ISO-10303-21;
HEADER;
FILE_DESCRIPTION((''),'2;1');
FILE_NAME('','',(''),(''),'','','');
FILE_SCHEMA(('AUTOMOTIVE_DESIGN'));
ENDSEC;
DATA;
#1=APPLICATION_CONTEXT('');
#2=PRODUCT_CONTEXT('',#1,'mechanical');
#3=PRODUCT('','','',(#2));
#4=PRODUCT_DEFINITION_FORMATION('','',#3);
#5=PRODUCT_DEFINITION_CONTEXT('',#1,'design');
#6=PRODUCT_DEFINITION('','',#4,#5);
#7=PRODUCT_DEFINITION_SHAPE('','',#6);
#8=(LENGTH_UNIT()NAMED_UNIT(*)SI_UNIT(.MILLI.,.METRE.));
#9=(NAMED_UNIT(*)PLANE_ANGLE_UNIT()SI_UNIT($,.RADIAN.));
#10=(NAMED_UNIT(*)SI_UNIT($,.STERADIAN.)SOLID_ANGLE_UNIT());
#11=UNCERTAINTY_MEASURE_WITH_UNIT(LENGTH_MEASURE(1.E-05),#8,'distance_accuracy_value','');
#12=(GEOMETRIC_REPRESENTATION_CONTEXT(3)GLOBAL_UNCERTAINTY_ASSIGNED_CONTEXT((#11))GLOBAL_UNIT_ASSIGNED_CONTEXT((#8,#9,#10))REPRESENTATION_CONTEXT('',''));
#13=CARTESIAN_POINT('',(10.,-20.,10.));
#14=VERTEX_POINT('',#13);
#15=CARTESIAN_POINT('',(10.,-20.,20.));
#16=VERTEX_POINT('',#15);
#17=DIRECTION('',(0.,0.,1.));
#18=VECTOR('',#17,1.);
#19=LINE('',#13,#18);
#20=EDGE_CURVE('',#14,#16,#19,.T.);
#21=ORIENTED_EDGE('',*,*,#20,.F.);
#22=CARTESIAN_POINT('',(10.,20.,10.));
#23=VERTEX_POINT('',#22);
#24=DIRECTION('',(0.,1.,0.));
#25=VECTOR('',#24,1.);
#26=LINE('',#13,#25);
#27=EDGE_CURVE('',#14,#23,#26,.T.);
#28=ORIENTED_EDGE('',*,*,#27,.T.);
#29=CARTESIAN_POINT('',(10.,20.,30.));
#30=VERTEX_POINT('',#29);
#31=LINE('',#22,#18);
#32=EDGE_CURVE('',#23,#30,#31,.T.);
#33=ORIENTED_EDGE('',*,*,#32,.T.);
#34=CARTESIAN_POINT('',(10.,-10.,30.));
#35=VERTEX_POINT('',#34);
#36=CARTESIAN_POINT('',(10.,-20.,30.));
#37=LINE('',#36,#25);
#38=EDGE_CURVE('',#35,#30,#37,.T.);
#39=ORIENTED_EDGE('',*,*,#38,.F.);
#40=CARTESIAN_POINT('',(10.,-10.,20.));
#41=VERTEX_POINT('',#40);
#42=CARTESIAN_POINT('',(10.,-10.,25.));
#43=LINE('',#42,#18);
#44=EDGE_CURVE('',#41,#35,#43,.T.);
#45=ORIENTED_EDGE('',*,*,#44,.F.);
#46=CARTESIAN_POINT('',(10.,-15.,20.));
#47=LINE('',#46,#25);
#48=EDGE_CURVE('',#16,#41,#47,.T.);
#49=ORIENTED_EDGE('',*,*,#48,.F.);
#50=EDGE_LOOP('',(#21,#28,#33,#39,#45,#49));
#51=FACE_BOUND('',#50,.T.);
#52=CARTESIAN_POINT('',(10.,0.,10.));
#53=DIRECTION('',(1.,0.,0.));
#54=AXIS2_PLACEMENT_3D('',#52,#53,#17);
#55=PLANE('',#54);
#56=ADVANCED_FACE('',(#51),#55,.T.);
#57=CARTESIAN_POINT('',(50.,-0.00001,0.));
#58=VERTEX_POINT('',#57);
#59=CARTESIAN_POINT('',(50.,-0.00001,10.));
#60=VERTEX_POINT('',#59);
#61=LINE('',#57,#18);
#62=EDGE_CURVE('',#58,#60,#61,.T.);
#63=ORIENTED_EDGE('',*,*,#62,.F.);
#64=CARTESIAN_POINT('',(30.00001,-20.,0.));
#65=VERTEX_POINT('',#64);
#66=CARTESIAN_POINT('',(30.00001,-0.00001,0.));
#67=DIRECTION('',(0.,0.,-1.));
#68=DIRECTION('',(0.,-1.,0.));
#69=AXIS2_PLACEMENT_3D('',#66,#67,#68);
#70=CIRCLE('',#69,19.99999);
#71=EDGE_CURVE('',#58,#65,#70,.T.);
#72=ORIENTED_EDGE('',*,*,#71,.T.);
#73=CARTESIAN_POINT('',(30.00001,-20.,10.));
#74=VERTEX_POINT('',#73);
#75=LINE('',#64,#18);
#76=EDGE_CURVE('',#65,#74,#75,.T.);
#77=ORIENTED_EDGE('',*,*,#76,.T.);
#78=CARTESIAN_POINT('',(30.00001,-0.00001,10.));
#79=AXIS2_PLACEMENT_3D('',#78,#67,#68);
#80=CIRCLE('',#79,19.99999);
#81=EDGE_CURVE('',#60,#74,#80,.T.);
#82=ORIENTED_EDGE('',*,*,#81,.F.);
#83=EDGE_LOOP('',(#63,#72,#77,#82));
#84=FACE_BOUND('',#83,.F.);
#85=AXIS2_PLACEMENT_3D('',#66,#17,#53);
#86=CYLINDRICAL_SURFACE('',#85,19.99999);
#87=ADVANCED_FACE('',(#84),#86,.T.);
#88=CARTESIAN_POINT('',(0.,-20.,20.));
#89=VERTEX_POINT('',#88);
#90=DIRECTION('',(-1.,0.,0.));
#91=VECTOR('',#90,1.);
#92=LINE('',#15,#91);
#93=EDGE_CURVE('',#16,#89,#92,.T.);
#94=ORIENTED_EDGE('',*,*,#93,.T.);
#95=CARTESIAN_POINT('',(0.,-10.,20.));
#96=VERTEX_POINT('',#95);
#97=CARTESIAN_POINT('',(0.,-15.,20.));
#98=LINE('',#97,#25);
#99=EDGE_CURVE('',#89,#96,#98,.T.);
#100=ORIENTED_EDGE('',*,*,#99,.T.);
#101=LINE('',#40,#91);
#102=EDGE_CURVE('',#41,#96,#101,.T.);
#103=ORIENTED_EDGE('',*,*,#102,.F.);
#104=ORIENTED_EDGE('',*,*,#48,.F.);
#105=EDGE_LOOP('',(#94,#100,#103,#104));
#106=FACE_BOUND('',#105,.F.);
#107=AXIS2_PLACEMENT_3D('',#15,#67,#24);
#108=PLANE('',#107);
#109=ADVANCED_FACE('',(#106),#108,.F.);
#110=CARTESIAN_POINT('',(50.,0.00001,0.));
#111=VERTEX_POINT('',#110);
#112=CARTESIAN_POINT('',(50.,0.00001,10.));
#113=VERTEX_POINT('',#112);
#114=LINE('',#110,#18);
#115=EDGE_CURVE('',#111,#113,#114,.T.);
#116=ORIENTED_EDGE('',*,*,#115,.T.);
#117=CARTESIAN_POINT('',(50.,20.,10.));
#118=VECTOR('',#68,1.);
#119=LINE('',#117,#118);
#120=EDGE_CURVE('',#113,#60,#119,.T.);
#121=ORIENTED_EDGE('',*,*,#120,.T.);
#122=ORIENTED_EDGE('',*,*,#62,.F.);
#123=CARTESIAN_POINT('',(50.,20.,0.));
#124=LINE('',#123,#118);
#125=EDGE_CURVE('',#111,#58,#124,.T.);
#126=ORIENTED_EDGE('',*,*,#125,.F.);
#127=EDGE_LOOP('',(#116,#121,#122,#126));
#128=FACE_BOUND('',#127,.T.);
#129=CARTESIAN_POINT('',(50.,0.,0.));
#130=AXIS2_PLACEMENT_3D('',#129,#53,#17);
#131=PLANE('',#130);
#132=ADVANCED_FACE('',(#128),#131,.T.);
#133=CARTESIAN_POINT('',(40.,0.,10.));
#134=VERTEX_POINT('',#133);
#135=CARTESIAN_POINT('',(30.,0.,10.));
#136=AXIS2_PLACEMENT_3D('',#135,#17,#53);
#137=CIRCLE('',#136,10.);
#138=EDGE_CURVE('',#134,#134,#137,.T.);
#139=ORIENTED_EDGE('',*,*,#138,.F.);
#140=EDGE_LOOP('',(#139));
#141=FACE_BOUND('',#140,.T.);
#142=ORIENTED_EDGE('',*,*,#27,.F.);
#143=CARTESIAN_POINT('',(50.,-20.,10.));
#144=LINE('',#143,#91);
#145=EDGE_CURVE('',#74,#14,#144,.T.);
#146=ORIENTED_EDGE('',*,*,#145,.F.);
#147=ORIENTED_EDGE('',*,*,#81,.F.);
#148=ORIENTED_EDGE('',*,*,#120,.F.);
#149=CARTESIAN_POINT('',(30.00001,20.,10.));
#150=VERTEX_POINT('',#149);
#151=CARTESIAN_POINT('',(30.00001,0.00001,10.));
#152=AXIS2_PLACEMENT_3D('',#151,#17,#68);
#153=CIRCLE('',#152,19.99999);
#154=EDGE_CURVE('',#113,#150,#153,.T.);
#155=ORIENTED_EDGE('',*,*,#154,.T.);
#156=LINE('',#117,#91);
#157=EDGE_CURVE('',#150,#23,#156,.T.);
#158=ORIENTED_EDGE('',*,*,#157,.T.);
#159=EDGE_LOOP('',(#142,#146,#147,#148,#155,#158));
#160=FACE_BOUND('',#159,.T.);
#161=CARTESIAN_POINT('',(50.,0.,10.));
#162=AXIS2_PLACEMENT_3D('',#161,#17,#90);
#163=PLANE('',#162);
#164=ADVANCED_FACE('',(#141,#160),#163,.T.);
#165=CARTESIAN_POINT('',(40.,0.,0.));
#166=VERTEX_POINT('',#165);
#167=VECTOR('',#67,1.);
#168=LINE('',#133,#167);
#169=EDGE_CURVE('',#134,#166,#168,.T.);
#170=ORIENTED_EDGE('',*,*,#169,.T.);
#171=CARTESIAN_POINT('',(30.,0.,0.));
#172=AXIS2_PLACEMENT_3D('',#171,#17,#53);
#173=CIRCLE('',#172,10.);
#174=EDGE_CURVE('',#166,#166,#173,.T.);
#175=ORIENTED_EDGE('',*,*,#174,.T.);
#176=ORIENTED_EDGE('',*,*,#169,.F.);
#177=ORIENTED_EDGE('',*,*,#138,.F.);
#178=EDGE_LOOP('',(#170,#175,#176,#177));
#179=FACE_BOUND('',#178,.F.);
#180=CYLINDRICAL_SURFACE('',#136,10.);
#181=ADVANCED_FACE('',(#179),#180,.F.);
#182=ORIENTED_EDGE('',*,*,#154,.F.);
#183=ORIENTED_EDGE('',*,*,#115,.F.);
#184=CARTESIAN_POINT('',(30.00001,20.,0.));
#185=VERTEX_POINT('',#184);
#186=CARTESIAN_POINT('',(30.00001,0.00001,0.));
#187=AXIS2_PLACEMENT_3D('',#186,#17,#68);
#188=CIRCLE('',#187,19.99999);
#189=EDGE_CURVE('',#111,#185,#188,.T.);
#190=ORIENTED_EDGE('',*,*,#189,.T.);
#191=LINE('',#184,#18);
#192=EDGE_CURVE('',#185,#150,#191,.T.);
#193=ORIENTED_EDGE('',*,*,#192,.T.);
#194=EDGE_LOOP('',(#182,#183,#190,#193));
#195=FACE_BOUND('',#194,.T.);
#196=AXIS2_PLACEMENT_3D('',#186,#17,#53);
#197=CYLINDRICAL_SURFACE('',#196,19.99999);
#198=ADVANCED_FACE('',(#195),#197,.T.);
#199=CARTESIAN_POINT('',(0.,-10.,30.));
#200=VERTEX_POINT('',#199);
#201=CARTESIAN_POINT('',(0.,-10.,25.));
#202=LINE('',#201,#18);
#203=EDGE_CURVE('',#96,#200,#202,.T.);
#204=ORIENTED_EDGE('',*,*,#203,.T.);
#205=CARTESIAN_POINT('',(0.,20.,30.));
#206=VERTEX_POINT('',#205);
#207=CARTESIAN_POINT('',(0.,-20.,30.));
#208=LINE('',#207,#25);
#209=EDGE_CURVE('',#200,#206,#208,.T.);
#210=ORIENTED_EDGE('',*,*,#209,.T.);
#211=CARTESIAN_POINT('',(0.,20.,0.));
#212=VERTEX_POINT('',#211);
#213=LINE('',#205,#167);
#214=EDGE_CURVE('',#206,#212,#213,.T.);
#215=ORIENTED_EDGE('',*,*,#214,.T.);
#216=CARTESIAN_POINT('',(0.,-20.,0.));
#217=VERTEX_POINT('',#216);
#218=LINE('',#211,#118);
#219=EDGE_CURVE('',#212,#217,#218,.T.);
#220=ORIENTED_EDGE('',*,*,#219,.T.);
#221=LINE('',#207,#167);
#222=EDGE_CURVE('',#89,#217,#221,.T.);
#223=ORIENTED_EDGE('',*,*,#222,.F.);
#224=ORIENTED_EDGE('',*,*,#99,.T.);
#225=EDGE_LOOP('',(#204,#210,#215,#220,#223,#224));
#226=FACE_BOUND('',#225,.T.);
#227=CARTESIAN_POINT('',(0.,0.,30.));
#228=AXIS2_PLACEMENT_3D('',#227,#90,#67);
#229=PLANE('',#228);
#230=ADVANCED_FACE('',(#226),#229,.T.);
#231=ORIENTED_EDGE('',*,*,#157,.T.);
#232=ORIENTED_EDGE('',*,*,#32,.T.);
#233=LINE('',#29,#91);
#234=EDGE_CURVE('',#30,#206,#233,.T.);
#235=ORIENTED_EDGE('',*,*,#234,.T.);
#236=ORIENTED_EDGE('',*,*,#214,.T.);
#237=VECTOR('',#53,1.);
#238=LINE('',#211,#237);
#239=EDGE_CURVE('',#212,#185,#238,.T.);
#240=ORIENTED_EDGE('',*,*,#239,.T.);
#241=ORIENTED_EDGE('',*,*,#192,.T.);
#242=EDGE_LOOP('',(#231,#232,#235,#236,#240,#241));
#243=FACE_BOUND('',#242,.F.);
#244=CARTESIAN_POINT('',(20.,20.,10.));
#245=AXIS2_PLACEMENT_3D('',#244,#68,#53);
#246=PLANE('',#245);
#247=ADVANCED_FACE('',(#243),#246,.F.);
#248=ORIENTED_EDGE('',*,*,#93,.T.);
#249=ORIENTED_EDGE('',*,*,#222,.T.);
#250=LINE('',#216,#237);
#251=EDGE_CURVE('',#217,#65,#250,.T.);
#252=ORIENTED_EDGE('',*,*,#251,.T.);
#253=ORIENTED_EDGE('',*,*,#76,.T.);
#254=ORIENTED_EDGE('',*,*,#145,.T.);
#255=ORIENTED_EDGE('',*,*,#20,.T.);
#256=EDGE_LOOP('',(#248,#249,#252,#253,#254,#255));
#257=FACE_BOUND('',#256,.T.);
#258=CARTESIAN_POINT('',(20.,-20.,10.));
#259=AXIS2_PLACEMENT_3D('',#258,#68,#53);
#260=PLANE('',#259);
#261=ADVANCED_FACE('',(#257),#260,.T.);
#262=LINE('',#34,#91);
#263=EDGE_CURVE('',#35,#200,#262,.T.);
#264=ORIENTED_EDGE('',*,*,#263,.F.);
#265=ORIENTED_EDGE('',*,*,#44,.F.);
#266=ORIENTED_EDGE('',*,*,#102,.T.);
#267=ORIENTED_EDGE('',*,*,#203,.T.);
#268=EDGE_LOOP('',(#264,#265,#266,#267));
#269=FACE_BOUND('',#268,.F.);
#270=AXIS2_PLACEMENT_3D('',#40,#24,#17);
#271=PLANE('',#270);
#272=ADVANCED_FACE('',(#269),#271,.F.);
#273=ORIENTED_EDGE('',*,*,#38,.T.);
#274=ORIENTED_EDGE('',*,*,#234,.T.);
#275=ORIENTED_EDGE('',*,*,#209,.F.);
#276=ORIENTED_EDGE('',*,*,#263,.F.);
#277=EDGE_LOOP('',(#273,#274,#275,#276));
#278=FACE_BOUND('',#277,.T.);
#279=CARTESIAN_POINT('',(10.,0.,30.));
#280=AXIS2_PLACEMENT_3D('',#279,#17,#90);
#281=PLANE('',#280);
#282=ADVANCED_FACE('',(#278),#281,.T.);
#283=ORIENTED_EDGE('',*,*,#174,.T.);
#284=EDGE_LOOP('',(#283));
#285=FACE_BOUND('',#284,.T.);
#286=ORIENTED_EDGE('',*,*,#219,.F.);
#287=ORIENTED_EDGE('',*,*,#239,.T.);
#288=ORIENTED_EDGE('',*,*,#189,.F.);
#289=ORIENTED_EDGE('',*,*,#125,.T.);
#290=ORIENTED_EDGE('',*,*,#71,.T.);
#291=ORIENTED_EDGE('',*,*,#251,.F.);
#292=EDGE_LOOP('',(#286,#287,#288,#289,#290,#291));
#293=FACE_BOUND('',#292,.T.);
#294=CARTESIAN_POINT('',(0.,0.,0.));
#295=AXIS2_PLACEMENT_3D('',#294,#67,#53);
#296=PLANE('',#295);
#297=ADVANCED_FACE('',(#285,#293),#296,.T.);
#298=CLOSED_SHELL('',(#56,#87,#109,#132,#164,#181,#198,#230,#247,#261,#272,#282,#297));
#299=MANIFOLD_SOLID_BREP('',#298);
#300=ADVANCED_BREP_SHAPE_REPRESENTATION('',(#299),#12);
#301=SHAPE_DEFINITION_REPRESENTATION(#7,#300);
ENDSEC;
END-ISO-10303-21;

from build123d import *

# Parameters (mm, degrees)
F1_DEPTH = 20
F2_R     = 19.99999
F3_R     = 10
F4_DEPTH = 10
F5_W     = 10
F5_H     = 10
F6_DEPTH = 10


# Not quite as in the source:
# - a fillet or chamfer is up to 0.001 mm smaller than in the source, because OpenCascade refuses the exact size


with BuildPart() as f1:
    # F0 (on Front) → F1 (new body, symmetric)
    with BuildSketch(Plane.XZ):
        Polygon((0, 30), (0, 0), (50, 0), (50, 10), (10, 10), (10, 30), align=None)
    extrude(amount=F1_DEPTH, both=True)

    # F2 (radius 20 in the source; OpenCascade refuses exactly that, so slightly less here)
    f2_edges = [f1.edges().sort_by_distance(p)[0] for p in [
        (50, -20, 5),
        (50, 20, 5),
    ]]
    fillet(f2_edges, radius=F2_R)

    # F3 (on face) → F4 (cut, through all)
    with BuildSketch(Plane.XY.offset(10)):
        with Locations((30, 0)):
            Circle(F3_R)
    extrude(amount=-F4_DEPTH, mode=Mode.SUBTRACT)

    # F5 (on face) → F6 (cut, through all)
    with BuildSketch(Plane.YZ.offset(10)):
        with Locations((-15, 25)):
            Rectangle(F5_W, F5_H)
    extrude(amount=-F6_DEPTH, mode=Mode.SUBTRACT)


solid = f1.part
